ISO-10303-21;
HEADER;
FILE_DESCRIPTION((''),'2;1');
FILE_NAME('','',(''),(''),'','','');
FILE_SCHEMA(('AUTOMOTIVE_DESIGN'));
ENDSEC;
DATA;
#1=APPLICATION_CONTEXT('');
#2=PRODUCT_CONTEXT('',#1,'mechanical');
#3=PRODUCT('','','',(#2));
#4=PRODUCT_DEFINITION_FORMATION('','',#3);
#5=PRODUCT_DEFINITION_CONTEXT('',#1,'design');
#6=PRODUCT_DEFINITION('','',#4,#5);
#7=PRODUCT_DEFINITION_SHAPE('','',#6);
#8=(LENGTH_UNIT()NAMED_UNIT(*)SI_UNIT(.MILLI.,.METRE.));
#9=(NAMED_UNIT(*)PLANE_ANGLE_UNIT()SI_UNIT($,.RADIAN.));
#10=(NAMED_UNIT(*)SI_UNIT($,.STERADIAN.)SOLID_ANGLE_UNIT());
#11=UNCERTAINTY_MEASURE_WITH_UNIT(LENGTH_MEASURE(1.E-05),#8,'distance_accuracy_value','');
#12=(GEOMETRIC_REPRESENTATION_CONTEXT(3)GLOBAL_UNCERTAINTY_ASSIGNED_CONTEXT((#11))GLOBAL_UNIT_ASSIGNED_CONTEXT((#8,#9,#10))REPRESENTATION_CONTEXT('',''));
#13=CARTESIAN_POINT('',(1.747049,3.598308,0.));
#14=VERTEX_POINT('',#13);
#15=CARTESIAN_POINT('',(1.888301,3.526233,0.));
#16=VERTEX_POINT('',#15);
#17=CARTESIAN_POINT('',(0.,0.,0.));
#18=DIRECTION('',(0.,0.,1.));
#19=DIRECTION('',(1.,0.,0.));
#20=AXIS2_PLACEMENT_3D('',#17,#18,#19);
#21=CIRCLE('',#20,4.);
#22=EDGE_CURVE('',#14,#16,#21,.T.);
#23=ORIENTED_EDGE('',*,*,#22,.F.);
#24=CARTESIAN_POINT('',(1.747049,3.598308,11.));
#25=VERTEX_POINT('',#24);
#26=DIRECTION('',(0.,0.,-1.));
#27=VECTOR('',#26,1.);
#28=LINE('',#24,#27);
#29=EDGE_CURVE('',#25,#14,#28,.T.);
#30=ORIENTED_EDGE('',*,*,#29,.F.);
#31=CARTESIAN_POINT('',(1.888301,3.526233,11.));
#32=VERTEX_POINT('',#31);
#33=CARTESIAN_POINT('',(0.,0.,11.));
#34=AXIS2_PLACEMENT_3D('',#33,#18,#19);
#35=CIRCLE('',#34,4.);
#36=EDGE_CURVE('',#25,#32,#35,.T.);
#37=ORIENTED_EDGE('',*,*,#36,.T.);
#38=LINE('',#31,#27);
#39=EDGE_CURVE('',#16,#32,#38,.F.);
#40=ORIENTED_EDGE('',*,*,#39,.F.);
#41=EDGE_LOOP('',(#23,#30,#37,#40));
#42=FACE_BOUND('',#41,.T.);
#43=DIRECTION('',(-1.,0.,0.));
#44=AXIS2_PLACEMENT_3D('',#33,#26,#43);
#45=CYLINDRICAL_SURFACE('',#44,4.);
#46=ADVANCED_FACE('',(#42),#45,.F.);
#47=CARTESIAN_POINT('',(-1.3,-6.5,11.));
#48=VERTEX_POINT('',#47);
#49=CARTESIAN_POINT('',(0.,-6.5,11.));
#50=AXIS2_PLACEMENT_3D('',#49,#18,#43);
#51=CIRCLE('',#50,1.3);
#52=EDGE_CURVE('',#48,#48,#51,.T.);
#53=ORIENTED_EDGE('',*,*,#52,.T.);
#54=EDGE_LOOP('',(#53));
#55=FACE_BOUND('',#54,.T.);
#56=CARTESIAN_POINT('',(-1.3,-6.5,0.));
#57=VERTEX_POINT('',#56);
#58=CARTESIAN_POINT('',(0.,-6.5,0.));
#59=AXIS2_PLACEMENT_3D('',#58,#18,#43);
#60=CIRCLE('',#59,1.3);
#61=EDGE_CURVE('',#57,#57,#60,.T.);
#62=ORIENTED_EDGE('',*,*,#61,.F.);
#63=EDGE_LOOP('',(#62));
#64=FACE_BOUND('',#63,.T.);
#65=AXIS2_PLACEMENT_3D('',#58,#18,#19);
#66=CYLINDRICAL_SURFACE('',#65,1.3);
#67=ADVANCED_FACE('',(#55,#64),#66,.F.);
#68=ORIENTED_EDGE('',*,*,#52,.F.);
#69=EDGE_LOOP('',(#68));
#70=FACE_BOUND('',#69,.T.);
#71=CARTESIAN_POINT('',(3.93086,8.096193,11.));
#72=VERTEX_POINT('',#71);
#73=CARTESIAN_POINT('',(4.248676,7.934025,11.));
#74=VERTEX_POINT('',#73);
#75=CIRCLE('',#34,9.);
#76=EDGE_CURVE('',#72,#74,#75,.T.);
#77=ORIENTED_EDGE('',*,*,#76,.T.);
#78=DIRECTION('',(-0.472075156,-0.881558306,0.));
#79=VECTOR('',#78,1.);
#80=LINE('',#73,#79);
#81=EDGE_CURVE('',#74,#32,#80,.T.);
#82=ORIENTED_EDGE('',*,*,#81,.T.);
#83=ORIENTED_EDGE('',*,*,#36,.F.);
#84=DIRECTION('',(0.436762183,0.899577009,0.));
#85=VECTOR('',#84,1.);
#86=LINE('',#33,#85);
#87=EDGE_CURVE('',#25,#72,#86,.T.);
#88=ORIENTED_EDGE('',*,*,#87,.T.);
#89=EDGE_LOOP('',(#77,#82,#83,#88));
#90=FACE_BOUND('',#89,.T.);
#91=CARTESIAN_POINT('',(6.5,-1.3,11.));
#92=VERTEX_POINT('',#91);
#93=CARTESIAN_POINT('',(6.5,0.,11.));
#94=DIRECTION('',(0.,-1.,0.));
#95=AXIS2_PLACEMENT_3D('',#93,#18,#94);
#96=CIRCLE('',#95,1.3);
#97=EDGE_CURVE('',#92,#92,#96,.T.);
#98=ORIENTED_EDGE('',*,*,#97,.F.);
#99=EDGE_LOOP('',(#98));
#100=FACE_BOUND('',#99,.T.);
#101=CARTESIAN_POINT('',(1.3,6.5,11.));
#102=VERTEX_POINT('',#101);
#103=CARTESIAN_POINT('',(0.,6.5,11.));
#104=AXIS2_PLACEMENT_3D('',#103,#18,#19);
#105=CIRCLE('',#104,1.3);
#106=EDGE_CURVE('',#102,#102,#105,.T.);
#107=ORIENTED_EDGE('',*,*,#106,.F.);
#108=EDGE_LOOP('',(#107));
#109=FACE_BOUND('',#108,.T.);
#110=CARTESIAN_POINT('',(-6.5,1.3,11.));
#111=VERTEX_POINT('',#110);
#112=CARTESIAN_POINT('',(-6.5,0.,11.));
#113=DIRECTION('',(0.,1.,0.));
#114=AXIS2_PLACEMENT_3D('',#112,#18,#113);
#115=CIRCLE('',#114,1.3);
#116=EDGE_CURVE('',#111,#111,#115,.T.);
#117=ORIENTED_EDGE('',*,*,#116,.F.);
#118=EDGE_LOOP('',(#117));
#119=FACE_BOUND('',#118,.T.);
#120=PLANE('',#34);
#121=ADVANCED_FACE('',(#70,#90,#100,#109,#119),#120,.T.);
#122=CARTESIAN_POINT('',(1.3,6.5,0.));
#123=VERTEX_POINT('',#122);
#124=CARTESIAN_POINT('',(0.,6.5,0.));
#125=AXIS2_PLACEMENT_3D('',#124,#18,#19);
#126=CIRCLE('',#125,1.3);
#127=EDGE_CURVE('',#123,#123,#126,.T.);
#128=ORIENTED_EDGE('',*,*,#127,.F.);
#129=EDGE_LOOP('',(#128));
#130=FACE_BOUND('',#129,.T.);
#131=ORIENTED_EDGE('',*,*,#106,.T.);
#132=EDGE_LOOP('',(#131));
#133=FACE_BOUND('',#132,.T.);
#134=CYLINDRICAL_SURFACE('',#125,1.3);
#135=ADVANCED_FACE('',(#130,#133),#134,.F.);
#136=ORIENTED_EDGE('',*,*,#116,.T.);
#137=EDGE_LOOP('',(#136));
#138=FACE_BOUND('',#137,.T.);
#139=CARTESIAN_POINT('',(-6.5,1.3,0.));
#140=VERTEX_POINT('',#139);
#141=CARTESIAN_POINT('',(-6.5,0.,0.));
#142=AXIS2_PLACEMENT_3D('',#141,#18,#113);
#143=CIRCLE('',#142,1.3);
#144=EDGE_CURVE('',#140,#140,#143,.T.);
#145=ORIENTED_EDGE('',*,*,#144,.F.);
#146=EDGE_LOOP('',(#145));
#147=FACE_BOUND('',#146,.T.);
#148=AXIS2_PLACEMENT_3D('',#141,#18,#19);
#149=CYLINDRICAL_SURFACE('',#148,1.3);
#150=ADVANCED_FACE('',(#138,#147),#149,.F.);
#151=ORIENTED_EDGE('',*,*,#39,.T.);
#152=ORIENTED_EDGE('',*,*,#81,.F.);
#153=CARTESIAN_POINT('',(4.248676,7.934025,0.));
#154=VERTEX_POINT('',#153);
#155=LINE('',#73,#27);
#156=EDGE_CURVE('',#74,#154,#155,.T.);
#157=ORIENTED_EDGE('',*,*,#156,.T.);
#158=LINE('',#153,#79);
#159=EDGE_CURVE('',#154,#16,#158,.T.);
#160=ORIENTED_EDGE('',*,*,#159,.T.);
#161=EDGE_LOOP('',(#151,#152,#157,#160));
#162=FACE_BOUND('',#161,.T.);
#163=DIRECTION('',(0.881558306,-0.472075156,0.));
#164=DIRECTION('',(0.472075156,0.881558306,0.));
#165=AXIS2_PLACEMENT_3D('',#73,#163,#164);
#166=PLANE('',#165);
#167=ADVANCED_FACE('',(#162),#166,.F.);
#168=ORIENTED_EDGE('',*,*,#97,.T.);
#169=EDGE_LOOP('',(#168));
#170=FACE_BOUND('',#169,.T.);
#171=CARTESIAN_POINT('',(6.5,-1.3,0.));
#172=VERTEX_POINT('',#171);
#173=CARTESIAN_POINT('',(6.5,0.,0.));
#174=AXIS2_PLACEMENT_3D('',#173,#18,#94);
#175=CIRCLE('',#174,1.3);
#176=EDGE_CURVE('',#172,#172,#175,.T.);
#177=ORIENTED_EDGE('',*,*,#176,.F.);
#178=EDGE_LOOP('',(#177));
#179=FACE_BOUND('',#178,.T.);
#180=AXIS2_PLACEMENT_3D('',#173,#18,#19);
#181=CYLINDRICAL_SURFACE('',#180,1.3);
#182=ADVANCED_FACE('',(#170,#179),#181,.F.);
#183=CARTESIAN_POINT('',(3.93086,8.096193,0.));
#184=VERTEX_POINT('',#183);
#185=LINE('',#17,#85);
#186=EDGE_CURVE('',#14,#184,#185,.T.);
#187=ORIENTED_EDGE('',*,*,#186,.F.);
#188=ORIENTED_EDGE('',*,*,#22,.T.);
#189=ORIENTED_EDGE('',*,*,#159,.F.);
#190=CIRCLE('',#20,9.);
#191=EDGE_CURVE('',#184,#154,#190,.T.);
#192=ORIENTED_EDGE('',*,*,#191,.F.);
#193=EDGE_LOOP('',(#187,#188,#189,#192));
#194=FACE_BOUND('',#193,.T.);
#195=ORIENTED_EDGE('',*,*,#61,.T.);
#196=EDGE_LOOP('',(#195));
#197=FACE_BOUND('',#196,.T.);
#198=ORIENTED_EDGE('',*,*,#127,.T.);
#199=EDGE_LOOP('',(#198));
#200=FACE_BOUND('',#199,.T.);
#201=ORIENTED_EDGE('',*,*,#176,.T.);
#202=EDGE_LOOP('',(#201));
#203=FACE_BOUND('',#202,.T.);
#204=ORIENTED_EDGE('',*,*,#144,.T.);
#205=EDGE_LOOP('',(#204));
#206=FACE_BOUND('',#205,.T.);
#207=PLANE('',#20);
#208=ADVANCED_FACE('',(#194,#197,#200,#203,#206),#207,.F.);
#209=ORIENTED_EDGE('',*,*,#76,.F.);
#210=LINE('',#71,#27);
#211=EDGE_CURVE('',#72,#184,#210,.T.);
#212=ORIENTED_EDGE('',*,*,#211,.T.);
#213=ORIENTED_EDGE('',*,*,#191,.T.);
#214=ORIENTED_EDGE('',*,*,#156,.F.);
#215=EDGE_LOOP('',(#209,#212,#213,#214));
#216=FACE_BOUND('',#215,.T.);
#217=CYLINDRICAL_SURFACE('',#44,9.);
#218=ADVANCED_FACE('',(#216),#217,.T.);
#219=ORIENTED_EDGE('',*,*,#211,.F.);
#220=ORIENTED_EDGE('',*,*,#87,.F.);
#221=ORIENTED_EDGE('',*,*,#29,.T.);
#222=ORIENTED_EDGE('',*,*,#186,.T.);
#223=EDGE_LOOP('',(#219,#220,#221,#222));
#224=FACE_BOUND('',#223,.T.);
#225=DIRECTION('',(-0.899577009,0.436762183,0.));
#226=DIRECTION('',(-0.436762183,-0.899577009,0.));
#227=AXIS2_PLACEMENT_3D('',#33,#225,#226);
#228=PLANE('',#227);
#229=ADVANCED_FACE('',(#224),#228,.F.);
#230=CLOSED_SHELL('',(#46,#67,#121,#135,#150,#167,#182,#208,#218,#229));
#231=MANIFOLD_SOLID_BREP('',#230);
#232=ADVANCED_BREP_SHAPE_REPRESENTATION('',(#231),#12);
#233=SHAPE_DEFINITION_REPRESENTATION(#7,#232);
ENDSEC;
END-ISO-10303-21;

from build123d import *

# Parameters (mm, degrees)
SKETCH_1_R               = 9
SKETCH_1_R_2             = 4
EXTRUDE_1_DEPTH          = 11
CUT_EXTRUDE_1_OUTLINE_R  = 1.3
CUT_EXTRUDE_1_DEPTH      = 11
PATTERN_CIRCULAR_1_COUNT = 4
CUT_EXTRUDE_2_DEPTH      = 17.822603841


# Read off the part's stored shape, not the designer's step: 切除-拉伸1
with BuildPart() as part:
    # 草图1 → 凸台-拉伸1 (new body)
    with BuildSketch(Plane.XY):
        Circle(SKETCH_1_R)
        Circle(SKETCH_1_R_2, mode=Mode.SUBTRACT)
    extrude(amount=EXTRUDE_1_DEPTH)

    # 切除-拉伸1 outline → 切除-拉伸1 (cut)
    with BuildSketch(Plane.XY):
        with Locations((0, 6.5)):
            Circle(CUT_EXTRUDE_1_OUTLINE_R)
    cut_extrude_1 = extrude(amount=CUT_EXTRUDE_1_DEPTH, mode=Mode.SUBTRACT)

    # 阵列(圆周)1: 切除-拉伸1 ×4 about axis
    pattern_circular_1_axis = Axis((0, 0, 0), (0, 0, 1))
    for i in range(1, PATTERN_CIRCULAR_1_COUNT):
        add(cut_extrude_1.rotate(pattern_circular_1_axis, i * 360 / PATTERN_CIRCULAR_1_COUNT), mode=Mode.SUBTRACT)

    # 草图6 → 切除-拉伸2 (cut, through all)
    with BuildSketch(Plane(origin=(0, 0, 0), x_dir=(-1, 0, 0), z_dir=(0, 0, -1))):
        with BuildLine():
            Line((-4.248676402, 7.934024756), (0, 0))
            Line((0, 0), (-3.930859643, 8.096193085))
            ThreePointArc((-3.930859643, 8.096193085), (-4.090571735, 8.016684033), (-4.248676402, 7.934024756))
        make_face()
    extrude(amount=-CUT_EXTRUDE_2_DEPTH, mode=Mode.SUBTRACT)


solid = part.part
